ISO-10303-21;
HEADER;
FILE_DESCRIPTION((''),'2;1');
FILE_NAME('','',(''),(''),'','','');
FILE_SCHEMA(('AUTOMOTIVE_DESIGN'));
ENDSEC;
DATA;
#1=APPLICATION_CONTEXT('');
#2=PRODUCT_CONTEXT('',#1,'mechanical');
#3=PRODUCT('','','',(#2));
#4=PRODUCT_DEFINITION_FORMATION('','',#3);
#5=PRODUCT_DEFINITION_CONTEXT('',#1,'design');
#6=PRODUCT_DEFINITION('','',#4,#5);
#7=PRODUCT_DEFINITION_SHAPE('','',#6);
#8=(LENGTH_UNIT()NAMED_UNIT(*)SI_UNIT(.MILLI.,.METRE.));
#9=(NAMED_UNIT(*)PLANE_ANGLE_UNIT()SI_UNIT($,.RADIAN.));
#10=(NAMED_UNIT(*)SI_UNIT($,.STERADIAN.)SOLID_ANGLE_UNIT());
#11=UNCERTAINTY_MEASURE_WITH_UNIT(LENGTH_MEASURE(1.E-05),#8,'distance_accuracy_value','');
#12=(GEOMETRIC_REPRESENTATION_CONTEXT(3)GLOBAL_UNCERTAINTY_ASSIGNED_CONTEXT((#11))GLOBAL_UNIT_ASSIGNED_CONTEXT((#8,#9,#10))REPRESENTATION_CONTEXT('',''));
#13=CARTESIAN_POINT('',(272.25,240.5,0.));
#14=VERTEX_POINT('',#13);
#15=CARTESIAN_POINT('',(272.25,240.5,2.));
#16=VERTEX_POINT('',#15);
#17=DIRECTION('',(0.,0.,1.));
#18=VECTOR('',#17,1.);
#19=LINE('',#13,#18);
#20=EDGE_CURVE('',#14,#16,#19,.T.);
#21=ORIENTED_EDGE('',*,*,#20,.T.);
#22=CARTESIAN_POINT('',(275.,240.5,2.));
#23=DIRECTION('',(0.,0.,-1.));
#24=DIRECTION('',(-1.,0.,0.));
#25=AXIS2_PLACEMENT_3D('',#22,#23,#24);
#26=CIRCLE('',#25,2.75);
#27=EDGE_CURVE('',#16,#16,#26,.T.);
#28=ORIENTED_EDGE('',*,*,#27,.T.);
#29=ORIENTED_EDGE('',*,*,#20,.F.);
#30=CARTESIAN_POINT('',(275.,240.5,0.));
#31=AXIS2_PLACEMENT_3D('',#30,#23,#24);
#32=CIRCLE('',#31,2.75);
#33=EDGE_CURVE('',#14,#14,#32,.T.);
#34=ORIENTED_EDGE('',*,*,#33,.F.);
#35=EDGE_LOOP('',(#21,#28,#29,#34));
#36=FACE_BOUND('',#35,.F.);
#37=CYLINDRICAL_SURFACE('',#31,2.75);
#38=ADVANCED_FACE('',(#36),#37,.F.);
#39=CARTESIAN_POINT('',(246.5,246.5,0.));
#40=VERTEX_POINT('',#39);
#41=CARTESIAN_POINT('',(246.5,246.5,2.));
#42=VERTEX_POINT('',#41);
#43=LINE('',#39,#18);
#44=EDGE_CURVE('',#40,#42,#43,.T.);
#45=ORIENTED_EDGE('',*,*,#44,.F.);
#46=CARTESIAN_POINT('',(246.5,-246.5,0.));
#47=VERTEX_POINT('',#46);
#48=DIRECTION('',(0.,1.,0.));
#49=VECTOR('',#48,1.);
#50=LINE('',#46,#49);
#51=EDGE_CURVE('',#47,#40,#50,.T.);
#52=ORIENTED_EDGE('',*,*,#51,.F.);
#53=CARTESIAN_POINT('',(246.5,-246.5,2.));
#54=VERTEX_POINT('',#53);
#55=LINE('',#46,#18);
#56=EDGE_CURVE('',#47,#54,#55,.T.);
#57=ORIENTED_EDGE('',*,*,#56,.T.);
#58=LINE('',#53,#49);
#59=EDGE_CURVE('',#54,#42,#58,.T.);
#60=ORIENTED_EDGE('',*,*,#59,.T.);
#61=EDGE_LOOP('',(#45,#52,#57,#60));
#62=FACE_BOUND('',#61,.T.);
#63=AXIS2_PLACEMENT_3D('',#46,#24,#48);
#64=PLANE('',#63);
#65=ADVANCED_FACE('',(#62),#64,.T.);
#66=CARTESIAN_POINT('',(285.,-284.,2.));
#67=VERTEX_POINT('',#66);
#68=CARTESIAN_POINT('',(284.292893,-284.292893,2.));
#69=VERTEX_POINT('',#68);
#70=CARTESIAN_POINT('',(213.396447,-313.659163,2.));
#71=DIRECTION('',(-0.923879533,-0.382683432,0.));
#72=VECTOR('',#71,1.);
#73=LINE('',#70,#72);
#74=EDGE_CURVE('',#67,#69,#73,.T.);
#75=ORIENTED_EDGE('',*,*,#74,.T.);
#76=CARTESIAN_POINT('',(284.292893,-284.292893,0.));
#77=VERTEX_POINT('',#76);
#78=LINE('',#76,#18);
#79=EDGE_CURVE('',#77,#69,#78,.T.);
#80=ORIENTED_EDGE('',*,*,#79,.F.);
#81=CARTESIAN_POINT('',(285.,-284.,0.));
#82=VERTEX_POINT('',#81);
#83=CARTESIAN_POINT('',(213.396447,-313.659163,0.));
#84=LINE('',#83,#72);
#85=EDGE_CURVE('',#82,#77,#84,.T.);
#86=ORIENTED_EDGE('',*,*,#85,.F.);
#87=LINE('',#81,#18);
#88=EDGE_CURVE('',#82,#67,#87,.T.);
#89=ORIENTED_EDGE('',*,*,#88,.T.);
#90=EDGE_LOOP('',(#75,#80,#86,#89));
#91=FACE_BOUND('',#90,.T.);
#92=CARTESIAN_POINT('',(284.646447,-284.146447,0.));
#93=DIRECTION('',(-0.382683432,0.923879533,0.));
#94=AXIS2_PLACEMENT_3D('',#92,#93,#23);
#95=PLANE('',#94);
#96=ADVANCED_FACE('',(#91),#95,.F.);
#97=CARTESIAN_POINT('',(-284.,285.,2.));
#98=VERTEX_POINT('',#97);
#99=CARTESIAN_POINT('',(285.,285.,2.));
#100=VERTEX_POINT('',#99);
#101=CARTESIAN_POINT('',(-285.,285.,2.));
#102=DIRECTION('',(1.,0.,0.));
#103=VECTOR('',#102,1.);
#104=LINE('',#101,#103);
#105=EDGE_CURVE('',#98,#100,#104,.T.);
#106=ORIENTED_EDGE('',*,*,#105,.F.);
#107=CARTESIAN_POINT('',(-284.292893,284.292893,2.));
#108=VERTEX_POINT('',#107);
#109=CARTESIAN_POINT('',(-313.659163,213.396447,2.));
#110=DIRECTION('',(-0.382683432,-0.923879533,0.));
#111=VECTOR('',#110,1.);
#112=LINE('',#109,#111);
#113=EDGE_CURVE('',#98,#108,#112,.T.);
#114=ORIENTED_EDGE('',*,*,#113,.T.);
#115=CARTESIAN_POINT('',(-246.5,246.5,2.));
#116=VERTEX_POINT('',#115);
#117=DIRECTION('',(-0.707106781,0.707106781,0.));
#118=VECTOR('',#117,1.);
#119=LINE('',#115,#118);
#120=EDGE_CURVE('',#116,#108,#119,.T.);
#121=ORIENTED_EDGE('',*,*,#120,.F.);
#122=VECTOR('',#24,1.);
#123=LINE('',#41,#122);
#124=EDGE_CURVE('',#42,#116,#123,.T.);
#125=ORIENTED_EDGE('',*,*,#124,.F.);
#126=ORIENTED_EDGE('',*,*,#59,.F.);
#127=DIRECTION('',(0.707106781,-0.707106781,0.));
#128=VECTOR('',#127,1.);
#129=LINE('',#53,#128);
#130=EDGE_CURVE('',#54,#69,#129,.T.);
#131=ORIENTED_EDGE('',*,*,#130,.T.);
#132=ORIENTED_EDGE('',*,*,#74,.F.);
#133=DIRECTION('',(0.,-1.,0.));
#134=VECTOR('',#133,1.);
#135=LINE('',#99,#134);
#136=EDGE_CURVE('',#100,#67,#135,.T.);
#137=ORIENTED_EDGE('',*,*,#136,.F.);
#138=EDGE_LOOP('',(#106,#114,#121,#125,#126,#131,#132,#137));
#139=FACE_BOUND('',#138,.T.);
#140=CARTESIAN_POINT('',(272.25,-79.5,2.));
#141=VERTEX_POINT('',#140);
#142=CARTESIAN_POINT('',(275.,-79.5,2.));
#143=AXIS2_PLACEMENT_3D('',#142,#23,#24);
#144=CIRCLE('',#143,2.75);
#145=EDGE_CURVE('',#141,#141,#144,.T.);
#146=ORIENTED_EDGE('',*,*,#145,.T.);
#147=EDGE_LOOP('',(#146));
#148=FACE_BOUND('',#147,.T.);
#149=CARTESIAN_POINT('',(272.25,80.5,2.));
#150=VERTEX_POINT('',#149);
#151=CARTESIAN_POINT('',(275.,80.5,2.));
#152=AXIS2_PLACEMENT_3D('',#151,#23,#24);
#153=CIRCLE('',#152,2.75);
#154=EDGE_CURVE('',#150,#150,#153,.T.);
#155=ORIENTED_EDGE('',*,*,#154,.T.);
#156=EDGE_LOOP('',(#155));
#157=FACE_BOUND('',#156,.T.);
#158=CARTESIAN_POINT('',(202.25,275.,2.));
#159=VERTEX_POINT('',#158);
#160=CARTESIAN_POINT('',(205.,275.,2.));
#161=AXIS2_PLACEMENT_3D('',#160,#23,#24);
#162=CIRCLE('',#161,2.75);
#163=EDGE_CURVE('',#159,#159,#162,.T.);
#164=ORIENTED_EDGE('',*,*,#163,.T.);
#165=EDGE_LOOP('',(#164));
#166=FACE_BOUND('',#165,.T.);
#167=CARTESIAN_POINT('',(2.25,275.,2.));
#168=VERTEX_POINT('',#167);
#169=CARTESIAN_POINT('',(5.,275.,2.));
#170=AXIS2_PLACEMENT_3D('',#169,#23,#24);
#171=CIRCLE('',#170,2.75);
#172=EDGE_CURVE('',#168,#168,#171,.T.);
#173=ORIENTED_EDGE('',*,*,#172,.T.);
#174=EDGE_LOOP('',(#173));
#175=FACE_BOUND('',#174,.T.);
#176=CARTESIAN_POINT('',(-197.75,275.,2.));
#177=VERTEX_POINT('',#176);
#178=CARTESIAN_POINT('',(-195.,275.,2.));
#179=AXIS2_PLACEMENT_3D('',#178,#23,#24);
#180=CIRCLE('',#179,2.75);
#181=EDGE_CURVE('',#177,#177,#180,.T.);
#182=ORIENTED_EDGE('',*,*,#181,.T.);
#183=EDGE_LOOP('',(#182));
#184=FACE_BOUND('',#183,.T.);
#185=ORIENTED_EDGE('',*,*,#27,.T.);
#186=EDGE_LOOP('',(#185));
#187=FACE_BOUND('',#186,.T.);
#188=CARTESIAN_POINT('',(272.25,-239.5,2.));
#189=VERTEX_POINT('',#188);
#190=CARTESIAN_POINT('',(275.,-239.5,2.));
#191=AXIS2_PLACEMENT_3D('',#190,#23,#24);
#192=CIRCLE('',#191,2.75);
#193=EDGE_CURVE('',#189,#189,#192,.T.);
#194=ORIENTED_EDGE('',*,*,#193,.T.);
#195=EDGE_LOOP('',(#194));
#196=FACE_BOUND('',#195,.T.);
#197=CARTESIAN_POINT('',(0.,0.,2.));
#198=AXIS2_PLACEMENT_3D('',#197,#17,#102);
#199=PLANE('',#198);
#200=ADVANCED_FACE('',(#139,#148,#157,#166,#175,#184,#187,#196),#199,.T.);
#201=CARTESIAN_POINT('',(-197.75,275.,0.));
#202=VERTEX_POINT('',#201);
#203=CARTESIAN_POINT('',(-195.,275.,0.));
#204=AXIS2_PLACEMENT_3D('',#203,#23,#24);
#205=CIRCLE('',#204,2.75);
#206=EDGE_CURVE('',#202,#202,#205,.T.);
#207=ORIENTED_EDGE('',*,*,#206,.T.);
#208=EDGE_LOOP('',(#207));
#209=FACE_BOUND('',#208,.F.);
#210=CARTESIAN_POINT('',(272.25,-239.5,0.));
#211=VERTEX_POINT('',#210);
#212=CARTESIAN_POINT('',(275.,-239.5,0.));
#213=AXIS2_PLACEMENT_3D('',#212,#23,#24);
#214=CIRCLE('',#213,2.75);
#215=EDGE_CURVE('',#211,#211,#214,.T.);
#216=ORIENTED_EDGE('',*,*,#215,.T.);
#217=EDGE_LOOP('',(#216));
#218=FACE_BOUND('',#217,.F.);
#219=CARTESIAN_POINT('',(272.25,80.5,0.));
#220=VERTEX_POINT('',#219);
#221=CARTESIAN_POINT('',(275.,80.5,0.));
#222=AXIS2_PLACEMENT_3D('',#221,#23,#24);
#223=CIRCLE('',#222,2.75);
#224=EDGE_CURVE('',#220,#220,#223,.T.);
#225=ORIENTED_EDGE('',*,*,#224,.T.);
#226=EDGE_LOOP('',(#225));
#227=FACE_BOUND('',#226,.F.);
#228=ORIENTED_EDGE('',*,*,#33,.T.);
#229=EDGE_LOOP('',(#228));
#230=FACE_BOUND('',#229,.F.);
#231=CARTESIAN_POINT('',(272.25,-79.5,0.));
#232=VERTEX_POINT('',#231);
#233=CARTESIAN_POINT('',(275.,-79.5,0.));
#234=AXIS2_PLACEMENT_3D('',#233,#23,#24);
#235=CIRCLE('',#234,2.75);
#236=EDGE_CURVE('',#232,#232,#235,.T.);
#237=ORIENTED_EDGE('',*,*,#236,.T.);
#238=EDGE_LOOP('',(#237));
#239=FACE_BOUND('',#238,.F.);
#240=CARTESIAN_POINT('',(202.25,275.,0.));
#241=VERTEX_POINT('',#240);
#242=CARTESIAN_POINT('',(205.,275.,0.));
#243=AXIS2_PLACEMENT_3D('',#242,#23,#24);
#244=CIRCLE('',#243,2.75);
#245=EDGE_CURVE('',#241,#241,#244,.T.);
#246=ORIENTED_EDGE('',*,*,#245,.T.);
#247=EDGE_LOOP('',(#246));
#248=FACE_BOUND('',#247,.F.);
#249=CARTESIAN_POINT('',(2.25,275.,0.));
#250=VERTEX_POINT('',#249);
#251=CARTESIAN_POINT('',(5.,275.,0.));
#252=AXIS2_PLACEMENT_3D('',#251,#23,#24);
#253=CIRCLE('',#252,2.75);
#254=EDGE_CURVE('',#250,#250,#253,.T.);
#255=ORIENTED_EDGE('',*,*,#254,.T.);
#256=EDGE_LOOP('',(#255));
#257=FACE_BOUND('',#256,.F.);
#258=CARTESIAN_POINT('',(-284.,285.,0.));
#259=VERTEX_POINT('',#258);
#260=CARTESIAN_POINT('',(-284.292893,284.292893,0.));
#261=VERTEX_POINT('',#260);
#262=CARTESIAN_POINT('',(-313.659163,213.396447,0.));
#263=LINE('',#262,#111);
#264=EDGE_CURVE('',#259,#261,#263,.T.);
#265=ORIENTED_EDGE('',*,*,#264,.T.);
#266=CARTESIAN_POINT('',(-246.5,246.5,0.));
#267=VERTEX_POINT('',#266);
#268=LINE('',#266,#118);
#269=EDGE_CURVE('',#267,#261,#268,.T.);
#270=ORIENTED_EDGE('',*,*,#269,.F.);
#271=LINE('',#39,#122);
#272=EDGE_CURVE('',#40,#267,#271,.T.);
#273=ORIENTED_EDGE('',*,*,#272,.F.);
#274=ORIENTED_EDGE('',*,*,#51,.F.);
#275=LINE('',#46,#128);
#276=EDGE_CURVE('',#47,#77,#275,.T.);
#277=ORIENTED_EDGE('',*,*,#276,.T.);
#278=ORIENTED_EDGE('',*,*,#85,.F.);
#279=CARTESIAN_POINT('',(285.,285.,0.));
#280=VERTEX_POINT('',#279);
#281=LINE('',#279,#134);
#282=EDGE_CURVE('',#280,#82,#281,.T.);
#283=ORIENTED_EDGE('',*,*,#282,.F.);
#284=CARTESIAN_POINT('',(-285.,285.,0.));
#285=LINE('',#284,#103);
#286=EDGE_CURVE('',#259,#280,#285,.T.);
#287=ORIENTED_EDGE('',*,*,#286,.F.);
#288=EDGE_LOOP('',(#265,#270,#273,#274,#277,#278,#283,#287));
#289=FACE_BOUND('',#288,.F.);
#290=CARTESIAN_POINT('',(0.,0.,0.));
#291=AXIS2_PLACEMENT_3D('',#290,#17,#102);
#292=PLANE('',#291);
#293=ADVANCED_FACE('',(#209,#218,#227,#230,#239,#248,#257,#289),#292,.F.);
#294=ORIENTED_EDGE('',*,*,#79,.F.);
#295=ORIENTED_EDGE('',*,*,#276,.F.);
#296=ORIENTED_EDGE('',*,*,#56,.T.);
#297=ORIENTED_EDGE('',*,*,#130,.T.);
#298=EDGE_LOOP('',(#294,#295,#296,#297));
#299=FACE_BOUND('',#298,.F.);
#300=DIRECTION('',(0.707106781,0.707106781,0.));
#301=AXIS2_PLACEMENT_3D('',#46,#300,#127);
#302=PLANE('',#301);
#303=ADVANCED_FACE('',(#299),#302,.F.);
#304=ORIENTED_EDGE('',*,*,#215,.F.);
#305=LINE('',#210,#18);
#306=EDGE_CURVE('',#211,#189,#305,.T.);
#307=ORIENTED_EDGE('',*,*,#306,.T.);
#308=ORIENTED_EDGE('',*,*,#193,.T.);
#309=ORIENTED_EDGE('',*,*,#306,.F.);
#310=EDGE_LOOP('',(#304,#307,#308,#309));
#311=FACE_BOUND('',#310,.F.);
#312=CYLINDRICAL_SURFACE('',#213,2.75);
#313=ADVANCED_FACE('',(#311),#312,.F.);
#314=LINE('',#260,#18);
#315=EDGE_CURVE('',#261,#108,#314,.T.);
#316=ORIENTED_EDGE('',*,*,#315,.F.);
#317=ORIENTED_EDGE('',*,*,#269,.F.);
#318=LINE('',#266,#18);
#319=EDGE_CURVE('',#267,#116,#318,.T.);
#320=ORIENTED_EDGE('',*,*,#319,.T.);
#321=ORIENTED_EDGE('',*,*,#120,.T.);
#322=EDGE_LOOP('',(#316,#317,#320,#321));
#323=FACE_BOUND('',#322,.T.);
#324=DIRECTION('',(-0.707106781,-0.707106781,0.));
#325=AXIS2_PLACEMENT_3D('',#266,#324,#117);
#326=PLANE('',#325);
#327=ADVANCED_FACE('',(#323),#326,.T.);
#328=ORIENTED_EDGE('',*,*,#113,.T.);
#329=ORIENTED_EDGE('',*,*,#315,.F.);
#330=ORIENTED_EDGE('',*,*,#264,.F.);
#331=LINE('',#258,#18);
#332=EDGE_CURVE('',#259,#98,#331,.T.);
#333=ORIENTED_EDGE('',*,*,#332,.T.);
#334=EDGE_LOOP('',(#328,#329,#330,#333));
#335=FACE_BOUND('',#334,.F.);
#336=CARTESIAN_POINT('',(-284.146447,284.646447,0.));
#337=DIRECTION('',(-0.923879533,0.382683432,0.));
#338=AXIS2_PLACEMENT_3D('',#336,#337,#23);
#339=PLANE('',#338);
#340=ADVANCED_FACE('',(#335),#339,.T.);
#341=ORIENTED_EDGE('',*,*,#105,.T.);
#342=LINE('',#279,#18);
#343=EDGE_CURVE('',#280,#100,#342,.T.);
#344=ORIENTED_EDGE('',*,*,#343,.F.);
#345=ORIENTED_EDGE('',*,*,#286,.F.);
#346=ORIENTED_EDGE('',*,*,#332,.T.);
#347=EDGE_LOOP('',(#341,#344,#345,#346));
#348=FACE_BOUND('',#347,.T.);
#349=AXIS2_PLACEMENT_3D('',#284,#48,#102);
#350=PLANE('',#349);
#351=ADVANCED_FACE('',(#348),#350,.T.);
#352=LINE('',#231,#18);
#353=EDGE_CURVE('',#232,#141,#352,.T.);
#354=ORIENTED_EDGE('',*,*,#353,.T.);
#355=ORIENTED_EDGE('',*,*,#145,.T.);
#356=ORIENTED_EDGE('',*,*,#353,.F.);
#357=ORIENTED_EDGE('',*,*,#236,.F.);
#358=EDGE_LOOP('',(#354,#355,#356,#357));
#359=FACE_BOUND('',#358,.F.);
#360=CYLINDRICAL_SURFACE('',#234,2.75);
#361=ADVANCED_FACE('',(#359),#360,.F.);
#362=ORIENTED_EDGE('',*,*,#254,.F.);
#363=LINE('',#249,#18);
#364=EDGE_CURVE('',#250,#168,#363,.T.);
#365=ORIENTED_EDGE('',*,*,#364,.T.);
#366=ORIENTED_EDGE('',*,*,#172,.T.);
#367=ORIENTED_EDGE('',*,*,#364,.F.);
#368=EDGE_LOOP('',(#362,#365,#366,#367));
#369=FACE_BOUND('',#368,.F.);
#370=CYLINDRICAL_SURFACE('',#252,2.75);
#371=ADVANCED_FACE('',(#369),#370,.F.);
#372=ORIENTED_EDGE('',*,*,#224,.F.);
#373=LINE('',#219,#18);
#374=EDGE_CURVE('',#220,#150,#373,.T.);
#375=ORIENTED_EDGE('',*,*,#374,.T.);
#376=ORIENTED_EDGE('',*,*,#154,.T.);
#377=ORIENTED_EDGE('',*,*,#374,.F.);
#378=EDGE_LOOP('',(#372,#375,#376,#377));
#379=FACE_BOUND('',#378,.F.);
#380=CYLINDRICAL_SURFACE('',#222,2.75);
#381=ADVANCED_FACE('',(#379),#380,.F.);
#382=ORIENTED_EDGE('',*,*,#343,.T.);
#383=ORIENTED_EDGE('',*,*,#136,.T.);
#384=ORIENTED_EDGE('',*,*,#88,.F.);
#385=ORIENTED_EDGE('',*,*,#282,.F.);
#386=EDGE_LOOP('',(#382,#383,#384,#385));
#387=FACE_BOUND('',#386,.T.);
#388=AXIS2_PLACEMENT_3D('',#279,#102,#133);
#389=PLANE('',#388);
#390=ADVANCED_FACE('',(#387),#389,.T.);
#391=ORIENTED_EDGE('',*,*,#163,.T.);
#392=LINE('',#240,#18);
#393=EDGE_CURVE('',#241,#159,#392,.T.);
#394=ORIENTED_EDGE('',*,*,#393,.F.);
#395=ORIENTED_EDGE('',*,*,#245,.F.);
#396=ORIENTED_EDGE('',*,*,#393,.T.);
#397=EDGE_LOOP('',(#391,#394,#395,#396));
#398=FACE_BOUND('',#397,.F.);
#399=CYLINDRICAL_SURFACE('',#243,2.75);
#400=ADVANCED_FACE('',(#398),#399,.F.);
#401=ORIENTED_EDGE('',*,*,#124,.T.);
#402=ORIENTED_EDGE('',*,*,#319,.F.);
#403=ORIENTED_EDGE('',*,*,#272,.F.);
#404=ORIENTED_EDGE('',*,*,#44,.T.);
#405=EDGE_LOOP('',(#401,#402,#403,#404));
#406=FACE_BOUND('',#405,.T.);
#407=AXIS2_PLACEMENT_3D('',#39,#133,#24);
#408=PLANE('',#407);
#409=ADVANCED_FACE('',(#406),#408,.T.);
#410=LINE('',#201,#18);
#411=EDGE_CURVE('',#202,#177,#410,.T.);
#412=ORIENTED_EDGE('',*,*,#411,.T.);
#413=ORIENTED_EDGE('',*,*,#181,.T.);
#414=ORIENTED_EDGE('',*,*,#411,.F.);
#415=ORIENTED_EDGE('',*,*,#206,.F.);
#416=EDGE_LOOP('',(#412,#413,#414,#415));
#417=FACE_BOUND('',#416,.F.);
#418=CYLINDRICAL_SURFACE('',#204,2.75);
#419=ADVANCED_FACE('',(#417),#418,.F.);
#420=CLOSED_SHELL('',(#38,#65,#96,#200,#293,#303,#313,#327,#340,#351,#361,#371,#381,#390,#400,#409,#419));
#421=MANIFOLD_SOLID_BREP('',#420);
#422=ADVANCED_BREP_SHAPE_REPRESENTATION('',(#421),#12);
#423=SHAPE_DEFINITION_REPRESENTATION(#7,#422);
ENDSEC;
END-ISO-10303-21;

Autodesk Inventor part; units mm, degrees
ref_plane "YZ Plane" through (0, 0, 0) normal (1, 0, 0) x (0, 1, 0)
ref_plane "XZ Plane" through (0, 0, 0) normal (0, 1, 0) x (-1, 0, 0)
ref_plane "XY Plane" through (0, 0, 0) normal (0, 0, 1) x (1, 0, 0)
sketch "Sketch1" plane through (0, 0, 0) normal (0, 0, 1) x (1, 0, 0)
  line L0 (-285, 285) -> (285, 285)
  line L1 (285, 285) -> (285, -285)
  line L2 (285, -285) -> (-285, -285)
  line L3 (-285, -285) -> (-285, 285)
  line L4 (-285, 285) -> (285, -285) construction
  line L5 (285, 285) -> (-285, -285) construction
  line L6 (-246.5, -246.5) -> (246.5, -246.5)
  line L7 (246.5, -246.5) -> (246.5, 246.5)
  line L8 (246.5, 246.5) -> (-246.5, 246.5)
  line L9 (-246.5, 246.5) -> (-246.5, -246.5)
  line L10 (-246.5, -246.5) -> (246.5, 246.5) construction
  line L11 (246.5, -246.5) -> (-246.5, 246.5) construction
  line L12 (-246.5, 246.5) -> (-285, 285)
  line L13 (246.5, -246.5) -> (285, -285)
  point P0 (0, 0)
  dimension "d1" = 570
  dimension "d2" = 493
extrude "Plate1" add sketch "Sketch1" along normal blind 2 contours L0 L1 L13 L7 L8 L12
chamfer "Corner Chamfer1" distance 1 angle 45 2 edges at (-285, 285, 1) (285, -285, 1)
sketch "Sketch2" plane through (0, 0, 0) normal (0, 0, -1) x (-1, 0, 0)
  line L0 (-284.2929, -284.2929) -> (-285, -284) projected
  line L1 (-246.5, -246.5) -> (-284.2929, -284.2929) projected
  line L2 (-246.5, 246.5) -> (-246.5, -246.5) construction
  line L3 (246.5, 246.5) -> (-246.5, 246.5) construction
  line L4 (284.2929, 284.2929) -> (246.5, 246.5) projected
  line L5 (284, 285) -> (284.2929, 284.2929) projected
  line L6 (-285, 285) -> (284, 285) construction
  line L7 (-285, -284) -> (-285, 285) construction
  circle A0 centre (-275, 240.5) radius 2.75
  circle A1 centre (-275, 80.5) radius 2.75
  circle A2 centre (-275, -79.5) radius 2.75
  circle A3 centre (-275, -239.5) radius 2.75
  line L8 (-275, 285) -> (-275, -275) construction
  line L9 (-285, 275) -> (275, 275) construction
  line L10 (-285, -284) -> (-285, 285) construction
  circle A4 centre (-205, 275) radius 2.75
  circle A5 centre (-5, 275) radius 2.75
  circle A6 centre (195, 275) radius 2.75
  point P0 (0, 0)
  point P1 (-285, 0.5)
  point P2 (-285, 0.5)
  point P3 (-285, 0.5)
  point P4 (-285, 0.5)
  dimension "d7" = 5.5
  dimension "d8" = 10
  dimension "d9" = 10
  dimension "d10" = 80
  dimension "d11" = 80
  dimension "d12" = 240
  dimension "d13" = 240
  dimension "d14" = 200
  dimension "d15" = 200
extrude "Cut1" cut sketch "Sketch2" against normal blind 2
equation "\"d9\" = d8"
equation "\"d11\" = d10"
equation "\"d13\" = d12"
equation "\"d15\" = d14"
equation "\"d16\" = Thickness"
equation "\"d3\" = Thickness"
equation "\"BendRadius\" = Thickness"
equation "\"BendReliefWidth\" = Thickness"
equation "\"BendReliefDepth\" = 0.5 * Thickness"
equation "\"CornerReliefSize\" = 4 * Thickness"
equation "\"MinimumRemnant\" = 2 * Thickness"
equation "\"TransitionRadius\" = BendRadius"
equation "\"JacobiRadiusSize\" = BendRadius"
equation "\"GapSize\" = Thickness"
equation "\"Thickness\" = 2"
properties part number "PNS waste water bin 01"
